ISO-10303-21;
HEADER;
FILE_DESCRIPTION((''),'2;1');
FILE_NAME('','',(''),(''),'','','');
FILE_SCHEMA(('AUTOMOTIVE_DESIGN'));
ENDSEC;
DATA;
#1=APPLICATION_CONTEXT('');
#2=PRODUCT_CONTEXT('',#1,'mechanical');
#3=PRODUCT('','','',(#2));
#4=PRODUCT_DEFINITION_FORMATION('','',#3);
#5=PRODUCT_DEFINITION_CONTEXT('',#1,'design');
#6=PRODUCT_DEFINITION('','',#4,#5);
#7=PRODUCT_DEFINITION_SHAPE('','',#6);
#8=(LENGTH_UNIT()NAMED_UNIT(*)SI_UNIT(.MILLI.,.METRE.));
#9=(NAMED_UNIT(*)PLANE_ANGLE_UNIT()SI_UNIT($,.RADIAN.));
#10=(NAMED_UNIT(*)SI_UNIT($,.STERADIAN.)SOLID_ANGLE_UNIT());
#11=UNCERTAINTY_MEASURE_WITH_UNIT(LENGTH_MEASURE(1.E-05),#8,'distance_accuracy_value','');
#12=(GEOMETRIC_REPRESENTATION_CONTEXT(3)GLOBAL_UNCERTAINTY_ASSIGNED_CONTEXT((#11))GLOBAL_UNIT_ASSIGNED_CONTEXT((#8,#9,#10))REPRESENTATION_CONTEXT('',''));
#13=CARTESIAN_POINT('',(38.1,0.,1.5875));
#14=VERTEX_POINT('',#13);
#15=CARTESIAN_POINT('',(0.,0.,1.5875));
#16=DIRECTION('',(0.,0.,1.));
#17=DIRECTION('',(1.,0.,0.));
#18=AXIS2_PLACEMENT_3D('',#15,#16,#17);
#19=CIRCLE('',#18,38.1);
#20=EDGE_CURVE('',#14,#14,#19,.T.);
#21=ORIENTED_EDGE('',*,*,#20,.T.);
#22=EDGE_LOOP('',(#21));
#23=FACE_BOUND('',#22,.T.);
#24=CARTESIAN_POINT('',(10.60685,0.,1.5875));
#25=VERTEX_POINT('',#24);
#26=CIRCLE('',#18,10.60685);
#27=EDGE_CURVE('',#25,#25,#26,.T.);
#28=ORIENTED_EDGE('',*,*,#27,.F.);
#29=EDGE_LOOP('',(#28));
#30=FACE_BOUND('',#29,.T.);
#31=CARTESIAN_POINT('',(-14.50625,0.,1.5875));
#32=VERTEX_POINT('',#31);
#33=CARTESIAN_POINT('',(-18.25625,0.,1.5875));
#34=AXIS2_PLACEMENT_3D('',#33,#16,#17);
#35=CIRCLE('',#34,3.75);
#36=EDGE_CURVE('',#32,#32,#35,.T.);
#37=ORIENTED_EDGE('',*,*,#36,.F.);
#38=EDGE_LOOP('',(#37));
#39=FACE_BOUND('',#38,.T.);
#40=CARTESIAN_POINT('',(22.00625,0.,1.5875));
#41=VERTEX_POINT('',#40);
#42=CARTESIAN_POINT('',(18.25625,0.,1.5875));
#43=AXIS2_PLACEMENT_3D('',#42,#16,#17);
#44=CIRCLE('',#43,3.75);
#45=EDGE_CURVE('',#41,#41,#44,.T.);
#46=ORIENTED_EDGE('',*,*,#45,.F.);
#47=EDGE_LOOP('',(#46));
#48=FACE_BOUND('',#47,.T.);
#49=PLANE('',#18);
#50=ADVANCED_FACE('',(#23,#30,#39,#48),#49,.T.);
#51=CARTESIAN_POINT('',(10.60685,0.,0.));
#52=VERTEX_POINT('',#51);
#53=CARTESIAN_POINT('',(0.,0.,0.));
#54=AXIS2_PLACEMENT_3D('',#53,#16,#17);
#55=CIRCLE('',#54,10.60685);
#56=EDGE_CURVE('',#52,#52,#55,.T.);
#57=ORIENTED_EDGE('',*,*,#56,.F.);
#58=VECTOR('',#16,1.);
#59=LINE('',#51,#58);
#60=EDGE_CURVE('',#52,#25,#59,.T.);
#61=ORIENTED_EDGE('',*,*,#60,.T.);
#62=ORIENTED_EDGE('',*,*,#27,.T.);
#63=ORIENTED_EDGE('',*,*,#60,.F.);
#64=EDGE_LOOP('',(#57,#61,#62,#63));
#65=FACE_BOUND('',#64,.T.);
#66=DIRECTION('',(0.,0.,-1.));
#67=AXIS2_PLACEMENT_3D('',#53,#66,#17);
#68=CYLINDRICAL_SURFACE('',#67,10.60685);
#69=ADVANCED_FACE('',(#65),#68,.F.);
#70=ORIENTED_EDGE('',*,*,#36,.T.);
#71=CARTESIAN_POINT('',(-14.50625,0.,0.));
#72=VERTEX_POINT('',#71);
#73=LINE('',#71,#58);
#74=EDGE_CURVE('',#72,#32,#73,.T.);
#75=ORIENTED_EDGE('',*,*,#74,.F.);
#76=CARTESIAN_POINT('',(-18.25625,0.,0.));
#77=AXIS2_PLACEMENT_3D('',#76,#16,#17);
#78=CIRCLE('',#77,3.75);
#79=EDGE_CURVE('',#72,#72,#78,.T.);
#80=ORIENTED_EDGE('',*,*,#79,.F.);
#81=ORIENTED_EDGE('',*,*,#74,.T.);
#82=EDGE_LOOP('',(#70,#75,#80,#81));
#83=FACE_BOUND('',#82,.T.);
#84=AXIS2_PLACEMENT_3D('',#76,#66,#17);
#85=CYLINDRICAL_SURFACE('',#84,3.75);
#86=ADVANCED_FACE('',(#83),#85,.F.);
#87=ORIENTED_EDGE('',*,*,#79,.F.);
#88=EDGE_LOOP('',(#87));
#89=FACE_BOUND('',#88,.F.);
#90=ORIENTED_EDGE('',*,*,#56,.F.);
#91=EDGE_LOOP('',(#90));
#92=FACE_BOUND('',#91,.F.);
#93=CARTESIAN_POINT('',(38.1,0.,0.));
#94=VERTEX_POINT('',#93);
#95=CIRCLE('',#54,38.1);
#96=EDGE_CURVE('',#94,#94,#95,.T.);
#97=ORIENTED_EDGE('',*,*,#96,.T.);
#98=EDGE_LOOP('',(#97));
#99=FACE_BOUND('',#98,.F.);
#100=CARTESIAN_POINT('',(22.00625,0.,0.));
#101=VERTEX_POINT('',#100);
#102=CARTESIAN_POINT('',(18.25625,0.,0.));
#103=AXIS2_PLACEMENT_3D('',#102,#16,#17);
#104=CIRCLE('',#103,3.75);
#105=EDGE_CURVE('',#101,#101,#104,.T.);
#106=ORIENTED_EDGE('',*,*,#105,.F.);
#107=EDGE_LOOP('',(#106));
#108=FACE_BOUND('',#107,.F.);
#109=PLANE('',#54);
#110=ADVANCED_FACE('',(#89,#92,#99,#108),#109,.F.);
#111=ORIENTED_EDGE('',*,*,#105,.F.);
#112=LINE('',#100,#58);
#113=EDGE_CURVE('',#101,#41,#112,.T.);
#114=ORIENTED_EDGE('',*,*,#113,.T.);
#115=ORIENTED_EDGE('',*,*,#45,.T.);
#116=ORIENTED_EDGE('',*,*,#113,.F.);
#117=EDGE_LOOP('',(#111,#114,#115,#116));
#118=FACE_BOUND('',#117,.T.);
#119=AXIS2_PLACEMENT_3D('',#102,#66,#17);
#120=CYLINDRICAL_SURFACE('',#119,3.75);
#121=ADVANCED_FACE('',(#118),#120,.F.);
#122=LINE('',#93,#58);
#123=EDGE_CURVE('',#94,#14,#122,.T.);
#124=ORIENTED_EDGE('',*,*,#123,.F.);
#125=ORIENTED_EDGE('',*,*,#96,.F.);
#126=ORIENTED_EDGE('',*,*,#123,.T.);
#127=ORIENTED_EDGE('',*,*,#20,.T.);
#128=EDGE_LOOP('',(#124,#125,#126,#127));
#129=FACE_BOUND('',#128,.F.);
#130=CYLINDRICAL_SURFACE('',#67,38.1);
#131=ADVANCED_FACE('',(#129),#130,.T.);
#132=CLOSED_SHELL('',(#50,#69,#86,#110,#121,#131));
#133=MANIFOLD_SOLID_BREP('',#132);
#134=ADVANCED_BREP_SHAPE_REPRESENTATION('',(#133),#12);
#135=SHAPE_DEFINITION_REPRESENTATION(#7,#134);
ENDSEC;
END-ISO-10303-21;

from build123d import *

# Parameters (mm, degrees)
F0_R     = 38.1
F0_R_2   = 3.75
F0_R_3   = 10.60685
F1_DEPTH = 1.5875


# Not quite as in the source:
# - a length typed as a fraction of an inch, garbled in the dataset ("3 / 203.2 mm" for 3/8 in), is restored


with BuildPart() as f1:
    # F0 (on Top) → F1 (new body)
    with BuildSketch(Plane.XY):
        Circle(F0_R)
        with Locations((-18.25625, 0)):
            Circle(F0_R_2, mode=Mode.SUBTRACT)
        Circle(F0_R_3, mode=Mode.SUBTRACT)
        with Locations((18.25625, 0)):
            Circle(F0_R_2, mode=Mode.SUBTRACT)
    extrude(amount=F1_DEPTH)


solid = f1.part
